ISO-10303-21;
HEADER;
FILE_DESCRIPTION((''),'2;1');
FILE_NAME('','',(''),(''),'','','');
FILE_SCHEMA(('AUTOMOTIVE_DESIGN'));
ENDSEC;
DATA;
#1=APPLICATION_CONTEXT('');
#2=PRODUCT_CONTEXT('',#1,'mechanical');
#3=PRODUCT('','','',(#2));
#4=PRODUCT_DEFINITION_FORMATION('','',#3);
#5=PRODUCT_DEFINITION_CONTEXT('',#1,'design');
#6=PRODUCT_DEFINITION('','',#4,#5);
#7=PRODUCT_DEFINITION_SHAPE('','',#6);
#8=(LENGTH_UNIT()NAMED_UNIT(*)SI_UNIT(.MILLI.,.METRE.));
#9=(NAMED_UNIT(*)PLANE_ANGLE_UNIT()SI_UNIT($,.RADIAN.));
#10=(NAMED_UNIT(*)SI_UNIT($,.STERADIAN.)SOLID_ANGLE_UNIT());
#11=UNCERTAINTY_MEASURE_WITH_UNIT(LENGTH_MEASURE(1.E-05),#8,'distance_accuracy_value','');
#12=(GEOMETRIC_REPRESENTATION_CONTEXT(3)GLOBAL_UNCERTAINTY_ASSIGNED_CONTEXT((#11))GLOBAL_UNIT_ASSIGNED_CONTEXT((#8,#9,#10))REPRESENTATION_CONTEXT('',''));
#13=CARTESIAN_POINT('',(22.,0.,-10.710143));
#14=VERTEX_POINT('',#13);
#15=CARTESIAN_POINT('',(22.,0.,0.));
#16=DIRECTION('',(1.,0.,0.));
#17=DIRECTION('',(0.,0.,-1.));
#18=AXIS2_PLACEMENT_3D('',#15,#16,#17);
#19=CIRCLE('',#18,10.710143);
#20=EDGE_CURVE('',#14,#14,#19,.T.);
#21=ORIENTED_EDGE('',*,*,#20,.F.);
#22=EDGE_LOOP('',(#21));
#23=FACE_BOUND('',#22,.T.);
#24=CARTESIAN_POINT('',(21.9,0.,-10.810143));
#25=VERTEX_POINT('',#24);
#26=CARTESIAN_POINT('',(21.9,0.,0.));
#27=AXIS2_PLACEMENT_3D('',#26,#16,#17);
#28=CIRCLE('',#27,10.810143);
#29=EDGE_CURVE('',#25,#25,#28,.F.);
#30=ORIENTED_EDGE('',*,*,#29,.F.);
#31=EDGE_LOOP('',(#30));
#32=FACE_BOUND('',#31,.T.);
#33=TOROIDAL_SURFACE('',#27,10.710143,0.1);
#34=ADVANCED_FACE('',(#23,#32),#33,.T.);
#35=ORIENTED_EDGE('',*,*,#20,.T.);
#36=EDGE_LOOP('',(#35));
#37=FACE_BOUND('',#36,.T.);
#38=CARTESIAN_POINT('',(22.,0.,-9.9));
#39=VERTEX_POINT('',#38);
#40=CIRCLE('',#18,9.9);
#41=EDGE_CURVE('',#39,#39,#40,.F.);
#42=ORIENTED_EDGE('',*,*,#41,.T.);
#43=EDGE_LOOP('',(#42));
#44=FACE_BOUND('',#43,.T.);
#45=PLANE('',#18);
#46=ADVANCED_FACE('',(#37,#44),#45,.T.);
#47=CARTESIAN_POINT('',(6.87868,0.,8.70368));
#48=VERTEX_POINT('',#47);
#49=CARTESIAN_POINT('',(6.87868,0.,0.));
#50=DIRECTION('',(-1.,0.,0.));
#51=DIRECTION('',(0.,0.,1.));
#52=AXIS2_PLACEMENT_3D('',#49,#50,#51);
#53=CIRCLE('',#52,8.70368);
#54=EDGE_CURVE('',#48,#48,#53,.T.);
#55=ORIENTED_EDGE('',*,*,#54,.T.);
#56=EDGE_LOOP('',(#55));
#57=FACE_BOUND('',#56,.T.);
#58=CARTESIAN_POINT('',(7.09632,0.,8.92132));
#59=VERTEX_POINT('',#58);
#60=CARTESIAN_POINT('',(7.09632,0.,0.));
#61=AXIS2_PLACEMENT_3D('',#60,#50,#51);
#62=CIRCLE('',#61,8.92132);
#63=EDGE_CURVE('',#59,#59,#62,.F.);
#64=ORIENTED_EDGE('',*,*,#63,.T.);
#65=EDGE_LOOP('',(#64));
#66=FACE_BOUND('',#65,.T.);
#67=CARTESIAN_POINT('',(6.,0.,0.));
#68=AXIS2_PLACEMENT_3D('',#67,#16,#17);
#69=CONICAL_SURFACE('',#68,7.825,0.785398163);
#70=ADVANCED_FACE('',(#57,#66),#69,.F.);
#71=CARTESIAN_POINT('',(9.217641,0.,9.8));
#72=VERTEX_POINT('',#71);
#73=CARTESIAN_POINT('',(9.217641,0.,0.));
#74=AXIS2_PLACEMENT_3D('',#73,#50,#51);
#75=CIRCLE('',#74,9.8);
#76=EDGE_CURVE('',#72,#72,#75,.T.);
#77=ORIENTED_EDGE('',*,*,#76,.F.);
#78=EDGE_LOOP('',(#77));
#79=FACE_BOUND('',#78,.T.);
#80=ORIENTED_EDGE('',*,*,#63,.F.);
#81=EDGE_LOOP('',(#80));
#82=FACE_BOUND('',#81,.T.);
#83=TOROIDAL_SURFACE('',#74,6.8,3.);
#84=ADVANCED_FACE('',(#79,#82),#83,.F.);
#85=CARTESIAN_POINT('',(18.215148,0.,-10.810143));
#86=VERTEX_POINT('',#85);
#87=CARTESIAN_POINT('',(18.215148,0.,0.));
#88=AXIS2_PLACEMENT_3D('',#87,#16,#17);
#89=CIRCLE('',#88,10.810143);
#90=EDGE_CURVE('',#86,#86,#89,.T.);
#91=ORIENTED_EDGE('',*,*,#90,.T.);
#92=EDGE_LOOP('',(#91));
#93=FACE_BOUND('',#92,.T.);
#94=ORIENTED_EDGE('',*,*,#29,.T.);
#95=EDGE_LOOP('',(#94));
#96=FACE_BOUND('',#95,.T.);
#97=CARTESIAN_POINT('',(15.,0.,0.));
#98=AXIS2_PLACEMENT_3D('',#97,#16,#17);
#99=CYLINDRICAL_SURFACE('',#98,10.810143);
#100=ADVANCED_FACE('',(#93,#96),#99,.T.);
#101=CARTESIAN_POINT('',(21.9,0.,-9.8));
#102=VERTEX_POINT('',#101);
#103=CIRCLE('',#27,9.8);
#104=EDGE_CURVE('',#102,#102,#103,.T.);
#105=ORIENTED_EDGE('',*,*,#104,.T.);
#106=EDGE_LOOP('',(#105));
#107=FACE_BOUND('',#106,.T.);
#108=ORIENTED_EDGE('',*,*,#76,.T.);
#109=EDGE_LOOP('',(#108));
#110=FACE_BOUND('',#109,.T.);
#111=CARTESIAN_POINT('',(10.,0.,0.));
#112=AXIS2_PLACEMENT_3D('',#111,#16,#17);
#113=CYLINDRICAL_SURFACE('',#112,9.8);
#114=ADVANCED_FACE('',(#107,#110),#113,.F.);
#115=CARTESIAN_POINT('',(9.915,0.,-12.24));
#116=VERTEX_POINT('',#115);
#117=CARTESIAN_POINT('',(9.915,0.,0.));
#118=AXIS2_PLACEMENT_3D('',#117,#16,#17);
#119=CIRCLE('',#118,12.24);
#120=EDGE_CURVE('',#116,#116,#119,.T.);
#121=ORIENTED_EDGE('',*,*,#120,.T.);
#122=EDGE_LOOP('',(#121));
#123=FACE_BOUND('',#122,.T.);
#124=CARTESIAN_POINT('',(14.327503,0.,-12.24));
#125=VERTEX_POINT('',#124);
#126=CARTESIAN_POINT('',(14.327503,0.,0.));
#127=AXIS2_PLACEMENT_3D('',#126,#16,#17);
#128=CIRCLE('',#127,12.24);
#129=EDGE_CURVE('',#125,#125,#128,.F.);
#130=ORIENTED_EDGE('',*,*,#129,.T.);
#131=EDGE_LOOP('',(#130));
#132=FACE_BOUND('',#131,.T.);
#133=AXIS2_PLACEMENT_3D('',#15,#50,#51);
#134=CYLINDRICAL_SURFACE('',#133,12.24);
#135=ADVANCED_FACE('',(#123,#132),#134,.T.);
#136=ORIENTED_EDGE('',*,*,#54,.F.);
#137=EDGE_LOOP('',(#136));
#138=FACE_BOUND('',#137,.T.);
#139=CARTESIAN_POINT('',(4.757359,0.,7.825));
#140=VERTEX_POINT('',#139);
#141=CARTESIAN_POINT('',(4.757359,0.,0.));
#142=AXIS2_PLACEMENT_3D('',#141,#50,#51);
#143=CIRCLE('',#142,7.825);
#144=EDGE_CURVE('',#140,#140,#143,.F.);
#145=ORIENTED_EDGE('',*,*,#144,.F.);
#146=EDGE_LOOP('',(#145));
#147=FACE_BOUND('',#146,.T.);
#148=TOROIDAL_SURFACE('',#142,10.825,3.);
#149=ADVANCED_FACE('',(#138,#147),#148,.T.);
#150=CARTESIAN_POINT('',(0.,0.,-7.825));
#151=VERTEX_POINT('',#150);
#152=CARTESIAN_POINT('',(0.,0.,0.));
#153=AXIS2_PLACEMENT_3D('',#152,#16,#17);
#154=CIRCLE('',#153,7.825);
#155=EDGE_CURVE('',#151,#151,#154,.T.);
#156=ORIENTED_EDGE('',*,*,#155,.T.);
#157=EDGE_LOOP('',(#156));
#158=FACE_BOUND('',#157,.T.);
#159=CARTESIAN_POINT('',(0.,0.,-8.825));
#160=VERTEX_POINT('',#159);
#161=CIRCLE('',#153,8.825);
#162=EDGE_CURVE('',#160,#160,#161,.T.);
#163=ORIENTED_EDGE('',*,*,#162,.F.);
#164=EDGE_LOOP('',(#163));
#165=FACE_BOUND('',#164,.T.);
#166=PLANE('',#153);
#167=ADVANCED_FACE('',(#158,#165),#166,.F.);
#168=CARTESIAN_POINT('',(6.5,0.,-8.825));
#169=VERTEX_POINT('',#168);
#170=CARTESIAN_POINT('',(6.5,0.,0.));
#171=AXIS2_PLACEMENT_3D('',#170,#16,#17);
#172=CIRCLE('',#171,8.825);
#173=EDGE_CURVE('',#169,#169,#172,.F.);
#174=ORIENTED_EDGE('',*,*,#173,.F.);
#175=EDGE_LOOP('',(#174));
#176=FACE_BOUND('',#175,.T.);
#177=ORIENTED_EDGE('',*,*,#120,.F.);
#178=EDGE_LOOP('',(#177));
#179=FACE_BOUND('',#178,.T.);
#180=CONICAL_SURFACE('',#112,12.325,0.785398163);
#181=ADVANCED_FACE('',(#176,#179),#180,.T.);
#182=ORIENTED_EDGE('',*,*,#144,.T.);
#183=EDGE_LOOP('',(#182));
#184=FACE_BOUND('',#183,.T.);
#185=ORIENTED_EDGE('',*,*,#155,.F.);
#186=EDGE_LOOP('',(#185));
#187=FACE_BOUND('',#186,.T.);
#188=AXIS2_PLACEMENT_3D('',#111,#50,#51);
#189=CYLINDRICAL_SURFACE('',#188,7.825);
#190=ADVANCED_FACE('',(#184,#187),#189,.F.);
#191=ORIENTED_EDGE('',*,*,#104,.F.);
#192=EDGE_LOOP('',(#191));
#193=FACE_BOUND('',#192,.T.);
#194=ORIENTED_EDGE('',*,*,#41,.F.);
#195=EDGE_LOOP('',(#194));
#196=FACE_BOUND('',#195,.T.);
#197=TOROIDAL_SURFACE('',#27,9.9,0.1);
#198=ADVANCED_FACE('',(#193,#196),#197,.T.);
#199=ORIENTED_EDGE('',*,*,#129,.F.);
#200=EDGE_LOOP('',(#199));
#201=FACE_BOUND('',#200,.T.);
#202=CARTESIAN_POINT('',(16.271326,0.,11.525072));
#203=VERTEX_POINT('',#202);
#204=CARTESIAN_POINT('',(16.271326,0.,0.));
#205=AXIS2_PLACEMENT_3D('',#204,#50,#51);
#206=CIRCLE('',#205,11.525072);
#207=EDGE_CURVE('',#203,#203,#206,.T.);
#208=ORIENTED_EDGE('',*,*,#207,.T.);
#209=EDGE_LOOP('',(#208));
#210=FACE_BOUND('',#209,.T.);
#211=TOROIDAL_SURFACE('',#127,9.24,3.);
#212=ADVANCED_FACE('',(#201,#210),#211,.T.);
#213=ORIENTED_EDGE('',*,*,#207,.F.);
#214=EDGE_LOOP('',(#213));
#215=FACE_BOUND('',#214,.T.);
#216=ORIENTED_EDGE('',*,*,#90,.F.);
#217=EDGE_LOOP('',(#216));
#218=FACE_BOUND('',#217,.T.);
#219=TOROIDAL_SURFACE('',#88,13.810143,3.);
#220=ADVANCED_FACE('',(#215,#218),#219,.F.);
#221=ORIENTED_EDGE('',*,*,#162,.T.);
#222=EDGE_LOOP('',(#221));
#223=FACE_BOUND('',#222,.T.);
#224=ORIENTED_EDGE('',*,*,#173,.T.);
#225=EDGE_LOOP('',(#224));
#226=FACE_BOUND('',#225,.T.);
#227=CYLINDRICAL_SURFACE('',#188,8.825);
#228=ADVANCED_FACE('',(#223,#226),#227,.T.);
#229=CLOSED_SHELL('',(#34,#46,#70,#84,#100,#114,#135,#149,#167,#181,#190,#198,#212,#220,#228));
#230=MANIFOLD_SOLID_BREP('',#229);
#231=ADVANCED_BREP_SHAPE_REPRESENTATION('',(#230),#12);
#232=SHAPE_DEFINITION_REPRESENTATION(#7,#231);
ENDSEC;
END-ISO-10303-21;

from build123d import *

# Parameters (mm, degrees)
SKETCH1_R           = 8.825
SKETCH1_R_2         = 7.825
BOSS_EXTRUDE1_DEPTH = 10
SKETCH2_R           = 12.24
SKETCH2_R_2         = 7.825
BOSS_EXTRUDE2_DEPTH = 12
CHAMFER1_SIZE       = 3.5
SKETCH3_R           = 9.8
CUT_EXTRUDE1_DEPTH  = 12
CHAMFER2_SIZE       = 4
FILLET1_R           = 3
SKETCH4_R           = 12.810143369
SKETCH4_R_2         = 10.810143369
CUT_EXTRUDE2_DEPTH  = 7
CHAMFER3_SIZE       = 2
FILLET2_R           = 3
FILLET3_R           = 3
FILLET4_R           = 0.1


with BuildPart() as part:
    # Sketch1 → Boss-Extrude1 (new body)
    with BuildSketch(Plane(origin=(0, 0, 0), x_dir=(0, 0, -1), z_dir=(1, 0, 0))):
        Circle(SKETCH1_R)
        Circle(SKETCH1_R_2, mode=Mode.SUBTRACT)
    extrude(amount=BOSS_EXTRUDE1_DEPTH)

    # Sketch2 → Boss-Extrude2 (add)
    with BuildSketch(Plane(origin=(10, 0, 0), x_dir=(0, 0, -1), z_dir=(1, 0, 0))):
        Circle(SKETCH2_R)
        Circle(SKETCH2_R_2, mode=Mode.SUBTRACT)
    extrude(amount=BOSS_EXTRUDE2_DEPTH)

    # Chamfer1
    # the kernel refuses this chamfer: 3.5 mm, written as the material it adds along each edge
    with BuildSketch(Plane(origin=(10, 0, 0), x_dir=(0, 0, -1), z_dir=(0, -1, 0))) as chamfer1_piece_1_section:
        Polygon((8.825, -CHAMFER1_SIZE), (8.825 + CHAMFER1_SIZE, 0), (8.825, 0), align=None)
    chamfer1_piece_1 = revolve(axis=Axis((10, 0, 0), (1, 0, 0)), mode=Mode.PRIVATE)
    chamfer1_piece_1 = chamfer1_piece_1 & Plane(origin=(8.210974628, 0, 0), x_dir=(0, 0, -1), z_dir=(-1, 0, 0)) * Cylinder(12.24, 50, mode=Mode.PRIVATE)
    add(chamfer1_piece_1)

    # Sketch3 → Cut-Extrude1 (cut)
    with BuildSketch(Plane(origin=(22, 0, 0), x_dir=(0, 0, -1), z_dir=(1, 0, 0))):
        Circle(SKETCH3_R)
    extrude(amount=-CUT_EXTRUDE1_DEPTH, mode=Mode.SUBTRACT)

    # Chamfer2
    # the kernel refuses this chamfer: 4 mm, written as the material it takes off along each edge
    with BuildSketch(Plane(origin=(10, 0, 0), x_dir=(0, 0, -1), z_dir=(0, 1, 0))) as chamfer2_piece_1_section:
        Polygon((7.825, CHAMFER2_SIZE), (7.825 + CHAMFER2_SIZE, 0), (7.825, 0), align=None)
    chamfer2_piece_1 = revolve(axis=Axis((10, 0, 0), (-1, 0, 0)), mode=Mode.PRIVATE)
    chamfer2_piece_1 = chamfer2_piece_1 & Plane(origin=(6.980894561, 0, 0), x_dir=(0, 0, -1), z_dir=(1, 0, 0)) * Cylinder(9.8, 48, mode=Mode.PRIVATE)
    add(chamfer2_piece_1, mode=Mode.SUBTRACT)

    # Fillet1
    fillet1_edges = [part.edges().sort_by_distance(p)[0] for p in [
        (6, 0, 7.825),
        (7.975, 0, 9.8),
    ]]
    fillet(fillet1_edges, radius=FILLET1_R)

    # Sketch4 → Cut-Extrude2 (cut)
    with BuildSketch(Plane(origin=(22, 0, 0), x_dir=(0, 0, -1), z_dir=(1, 0, 0))):
        Circle(SKETCH4_R)
        Circle(SKETCH4_R_2, mode=Mode.SUBTRACT)
    extrude(amount=-CUT_EXTRUDE2_DEPTH, mode=Mode.SUBTRACT)

    # Chamfer3
    # the kernel refuses this chamfer: 2 mm, written as the material it adds along each edge
    with BuildSketch(Plane(origin=(15, 0, 0), x_dir=(0, 0, -1), z_dir=(0, -1, 0))) as chamfer3_piece_1_section:
        Polygon((10.810143369 + CHAMFER3_SIZE, 0), (10.810143369, CHAMFER3_SIZE), (10.810143369, 0), align=None)
    chamfer3_piece_1 = revolve(axis=Axis((15, 0, 0), (1, 0, 0)), mode=Mode.PRIVATE)
    chamfer3_piece_1 = chamfer3_piece_1 & Plane(origin=(16.276433471, 0, 0), x_dir=(0, 0, -1), z_dir=(-1, 0, 0)) * Cylinder(12.24, 52, mode=Mode.PRIVATE)
    add(chamfer3_piece_1)

    # Fillet2
    fillet2_edges = [part.edges().sort_by_distance(p)[0] for p in [
        (15.570143369, 0, 12.24),
    ]]
    fillet(fillet2_edges, radius=FILLET2_R)

    # Fillet3
    fillet3_edges = [part.edges().sort_by_distance(p)[0] for p in [
        (17, 0, 10.810143369),
    ]]
    fillet(fillet3_edges, radius=FILLET3_R)

    # Fillet4
    fillet4_edges = [part.edges().sort_by_distance(p)[0] for p in [
        (22, 0, 9.8),
        (22, 0, 10.810143369),
    ]]
    fillet(fillet4_edges, radius=FILLET4_R)


solid = part.part
